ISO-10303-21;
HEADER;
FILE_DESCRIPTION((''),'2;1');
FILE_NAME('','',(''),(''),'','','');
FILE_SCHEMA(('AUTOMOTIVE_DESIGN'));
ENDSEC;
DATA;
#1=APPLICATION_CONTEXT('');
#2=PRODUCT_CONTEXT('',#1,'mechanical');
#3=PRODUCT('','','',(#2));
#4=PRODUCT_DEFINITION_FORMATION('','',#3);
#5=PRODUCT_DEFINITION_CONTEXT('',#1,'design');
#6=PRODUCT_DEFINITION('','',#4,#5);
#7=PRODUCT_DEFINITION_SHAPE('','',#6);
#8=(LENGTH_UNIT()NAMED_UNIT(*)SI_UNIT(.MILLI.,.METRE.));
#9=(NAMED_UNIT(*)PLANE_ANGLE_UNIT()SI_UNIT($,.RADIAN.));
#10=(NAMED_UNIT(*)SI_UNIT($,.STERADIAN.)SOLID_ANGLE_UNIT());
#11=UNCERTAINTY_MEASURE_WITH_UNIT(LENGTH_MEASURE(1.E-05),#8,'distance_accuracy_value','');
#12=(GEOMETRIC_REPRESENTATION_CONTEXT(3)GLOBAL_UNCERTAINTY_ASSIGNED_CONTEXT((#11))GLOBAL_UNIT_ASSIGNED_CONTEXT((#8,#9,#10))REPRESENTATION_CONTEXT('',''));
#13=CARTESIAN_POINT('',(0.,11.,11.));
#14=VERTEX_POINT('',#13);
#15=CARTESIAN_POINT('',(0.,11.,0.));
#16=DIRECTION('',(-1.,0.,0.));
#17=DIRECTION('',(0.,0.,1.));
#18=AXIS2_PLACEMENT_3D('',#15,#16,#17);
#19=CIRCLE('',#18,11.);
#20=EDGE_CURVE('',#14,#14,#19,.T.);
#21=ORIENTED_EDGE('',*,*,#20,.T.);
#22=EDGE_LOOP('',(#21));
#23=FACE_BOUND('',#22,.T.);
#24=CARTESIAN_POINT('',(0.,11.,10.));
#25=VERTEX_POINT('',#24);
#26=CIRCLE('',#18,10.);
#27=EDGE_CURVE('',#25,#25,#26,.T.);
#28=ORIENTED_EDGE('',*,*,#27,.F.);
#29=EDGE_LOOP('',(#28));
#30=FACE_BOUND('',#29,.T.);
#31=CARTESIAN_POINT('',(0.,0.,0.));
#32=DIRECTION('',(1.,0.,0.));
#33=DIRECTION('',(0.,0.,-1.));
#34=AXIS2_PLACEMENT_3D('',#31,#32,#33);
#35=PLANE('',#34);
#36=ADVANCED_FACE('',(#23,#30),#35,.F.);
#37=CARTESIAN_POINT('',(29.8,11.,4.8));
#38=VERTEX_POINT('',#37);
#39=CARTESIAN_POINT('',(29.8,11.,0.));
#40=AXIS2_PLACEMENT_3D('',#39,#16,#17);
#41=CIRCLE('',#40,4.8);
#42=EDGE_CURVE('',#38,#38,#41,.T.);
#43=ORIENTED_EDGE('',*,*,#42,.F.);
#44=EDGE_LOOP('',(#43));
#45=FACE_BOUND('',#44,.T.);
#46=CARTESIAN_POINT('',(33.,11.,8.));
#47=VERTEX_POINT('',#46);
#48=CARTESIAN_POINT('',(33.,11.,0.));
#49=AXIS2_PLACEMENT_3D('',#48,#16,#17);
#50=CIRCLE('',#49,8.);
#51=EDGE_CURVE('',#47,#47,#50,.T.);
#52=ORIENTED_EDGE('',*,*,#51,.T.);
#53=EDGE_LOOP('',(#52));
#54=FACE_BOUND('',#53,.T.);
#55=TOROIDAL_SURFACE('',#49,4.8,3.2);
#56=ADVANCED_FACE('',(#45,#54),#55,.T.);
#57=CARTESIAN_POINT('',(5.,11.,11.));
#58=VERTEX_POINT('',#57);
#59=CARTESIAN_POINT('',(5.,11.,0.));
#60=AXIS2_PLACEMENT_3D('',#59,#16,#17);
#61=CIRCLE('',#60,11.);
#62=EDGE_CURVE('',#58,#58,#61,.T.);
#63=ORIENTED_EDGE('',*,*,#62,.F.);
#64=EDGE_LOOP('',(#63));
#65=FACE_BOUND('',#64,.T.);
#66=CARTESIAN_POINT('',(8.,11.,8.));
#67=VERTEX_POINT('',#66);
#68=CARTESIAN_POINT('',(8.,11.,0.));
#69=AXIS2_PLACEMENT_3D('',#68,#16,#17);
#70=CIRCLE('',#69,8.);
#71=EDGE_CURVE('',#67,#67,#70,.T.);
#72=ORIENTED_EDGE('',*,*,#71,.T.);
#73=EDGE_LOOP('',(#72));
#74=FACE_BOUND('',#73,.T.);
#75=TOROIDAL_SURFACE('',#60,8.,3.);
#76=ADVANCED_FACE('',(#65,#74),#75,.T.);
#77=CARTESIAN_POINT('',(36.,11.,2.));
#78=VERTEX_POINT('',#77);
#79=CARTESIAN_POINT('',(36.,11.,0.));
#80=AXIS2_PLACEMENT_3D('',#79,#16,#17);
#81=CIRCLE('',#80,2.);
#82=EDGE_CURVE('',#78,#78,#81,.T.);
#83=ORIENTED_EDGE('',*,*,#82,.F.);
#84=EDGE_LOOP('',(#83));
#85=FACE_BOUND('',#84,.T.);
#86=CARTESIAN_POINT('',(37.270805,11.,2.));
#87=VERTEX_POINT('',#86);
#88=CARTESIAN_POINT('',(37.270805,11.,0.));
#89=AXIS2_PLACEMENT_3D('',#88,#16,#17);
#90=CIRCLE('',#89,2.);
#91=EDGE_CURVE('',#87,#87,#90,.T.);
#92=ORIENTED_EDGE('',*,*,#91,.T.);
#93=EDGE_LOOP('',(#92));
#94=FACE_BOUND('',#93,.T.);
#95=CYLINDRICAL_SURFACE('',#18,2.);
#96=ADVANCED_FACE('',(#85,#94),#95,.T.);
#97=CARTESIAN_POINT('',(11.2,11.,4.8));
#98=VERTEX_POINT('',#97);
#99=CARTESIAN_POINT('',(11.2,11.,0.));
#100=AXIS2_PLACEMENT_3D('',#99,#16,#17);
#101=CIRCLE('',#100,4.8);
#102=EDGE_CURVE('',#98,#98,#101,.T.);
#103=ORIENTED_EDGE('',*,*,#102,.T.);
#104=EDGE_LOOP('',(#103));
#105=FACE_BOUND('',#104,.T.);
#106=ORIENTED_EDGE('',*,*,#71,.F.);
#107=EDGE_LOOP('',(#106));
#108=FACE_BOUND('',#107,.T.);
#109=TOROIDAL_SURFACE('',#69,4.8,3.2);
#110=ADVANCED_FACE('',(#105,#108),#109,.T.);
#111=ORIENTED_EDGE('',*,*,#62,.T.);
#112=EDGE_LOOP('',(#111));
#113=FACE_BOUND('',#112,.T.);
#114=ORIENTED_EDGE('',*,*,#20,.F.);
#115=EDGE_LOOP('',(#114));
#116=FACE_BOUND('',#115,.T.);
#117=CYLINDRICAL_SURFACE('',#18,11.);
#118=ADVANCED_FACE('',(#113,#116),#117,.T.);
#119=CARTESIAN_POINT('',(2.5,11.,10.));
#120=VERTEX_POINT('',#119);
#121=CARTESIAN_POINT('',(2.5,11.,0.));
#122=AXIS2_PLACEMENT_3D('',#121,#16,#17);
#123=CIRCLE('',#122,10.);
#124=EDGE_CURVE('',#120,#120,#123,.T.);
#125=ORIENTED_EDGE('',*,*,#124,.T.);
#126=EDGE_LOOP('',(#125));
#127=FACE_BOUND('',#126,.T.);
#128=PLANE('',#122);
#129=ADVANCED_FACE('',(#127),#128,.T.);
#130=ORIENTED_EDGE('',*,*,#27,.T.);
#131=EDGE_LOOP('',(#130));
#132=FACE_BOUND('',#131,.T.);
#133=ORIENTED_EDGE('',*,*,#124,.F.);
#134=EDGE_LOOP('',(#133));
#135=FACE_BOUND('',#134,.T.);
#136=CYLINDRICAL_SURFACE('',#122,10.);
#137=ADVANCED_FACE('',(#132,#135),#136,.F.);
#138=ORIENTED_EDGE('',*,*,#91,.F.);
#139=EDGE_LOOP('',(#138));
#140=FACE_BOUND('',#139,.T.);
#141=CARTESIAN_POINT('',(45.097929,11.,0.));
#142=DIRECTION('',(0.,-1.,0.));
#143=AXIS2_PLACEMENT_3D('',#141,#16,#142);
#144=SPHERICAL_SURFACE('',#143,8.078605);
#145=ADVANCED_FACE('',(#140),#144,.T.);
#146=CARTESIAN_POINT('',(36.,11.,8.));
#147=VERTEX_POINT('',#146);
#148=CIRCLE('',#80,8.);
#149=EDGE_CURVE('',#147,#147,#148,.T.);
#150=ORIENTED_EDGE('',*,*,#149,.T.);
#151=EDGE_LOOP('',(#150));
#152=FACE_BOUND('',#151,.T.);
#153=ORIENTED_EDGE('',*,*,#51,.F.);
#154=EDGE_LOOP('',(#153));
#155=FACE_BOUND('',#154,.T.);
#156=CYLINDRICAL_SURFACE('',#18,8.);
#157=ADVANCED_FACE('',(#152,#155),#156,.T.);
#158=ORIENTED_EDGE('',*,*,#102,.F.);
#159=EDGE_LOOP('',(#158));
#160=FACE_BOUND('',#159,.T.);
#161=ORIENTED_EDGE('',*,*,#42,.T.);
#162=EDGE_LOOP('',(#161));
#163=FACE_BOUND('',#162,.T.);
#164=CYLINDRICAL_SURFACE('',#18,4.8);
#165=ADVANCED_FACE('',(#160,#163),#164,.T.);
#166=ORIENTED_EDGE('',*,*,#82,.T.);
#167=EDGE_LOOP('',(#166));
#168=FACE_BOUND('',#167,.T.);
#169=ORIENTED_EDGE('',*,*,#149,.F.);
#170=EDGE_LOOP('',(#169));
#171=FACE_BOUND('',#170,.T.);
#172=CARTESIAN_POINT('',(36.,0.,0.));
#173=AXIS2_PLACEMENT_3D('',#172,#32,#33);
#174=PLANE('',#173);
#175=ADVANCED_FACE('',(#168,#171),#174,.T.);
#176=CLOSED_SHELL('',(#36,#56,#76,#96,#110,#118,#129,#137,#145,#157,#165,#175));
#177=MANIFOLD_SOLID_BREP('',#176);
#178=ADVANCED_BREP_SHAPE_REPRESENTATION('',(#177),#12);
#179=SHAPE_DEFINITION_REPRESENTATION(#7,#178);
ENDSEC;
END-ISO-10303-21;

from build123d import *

# Parameters (mm, degrees)
SKETCH_3_R          = 10
CUT_EXTRUDE_1_DEPTH = 2.5


with BuildPart() as part:
    # Эскиз2 → Повернуть7 (revolve)
    with BuildSketch(Plane.XY):
        with BuildLine():
            Line((0, 11), (0, 0))
            Line((0, 0), (5, 0))
            ThreePointArc((5, 0), (7.121320344, 0.878679656), (8, 3))
            ThreePointArc((8, 3), (10.2627417, 3.9372583), (11.2, 6.2))
            Line((11.2, 6.2), (29.8, 6.2))
            ThreePointArc((29.8, 6.2), (30.7372583, 3.9372583), (33, 3))
            Line((33, 3), (36, 3))
            Line((36, 3), (36, 9))
            Line((36, 9), (37.270805384, 9))
            ThreePointArc((37.270805384, 9), (46.105803041, 2.98451199), (53.176533665, 11))
            Line((53.176533665, 11), (0, 11))
        make_face()
    revolve(axis=Axis((0, 11, 0), (1, 0, 0)))

    # Эскиз3 → Вырез-Вытянуть1 (cut)
    with BuildSketch(Plane.ZY):
        with Locations((0, 11)):
            Circle(SKETCH_3_R)
    extrude(amount=-CUT_EXTRUDE_1_DEPTH, mode=Mode.SUBTRACT)


solid = part.part
